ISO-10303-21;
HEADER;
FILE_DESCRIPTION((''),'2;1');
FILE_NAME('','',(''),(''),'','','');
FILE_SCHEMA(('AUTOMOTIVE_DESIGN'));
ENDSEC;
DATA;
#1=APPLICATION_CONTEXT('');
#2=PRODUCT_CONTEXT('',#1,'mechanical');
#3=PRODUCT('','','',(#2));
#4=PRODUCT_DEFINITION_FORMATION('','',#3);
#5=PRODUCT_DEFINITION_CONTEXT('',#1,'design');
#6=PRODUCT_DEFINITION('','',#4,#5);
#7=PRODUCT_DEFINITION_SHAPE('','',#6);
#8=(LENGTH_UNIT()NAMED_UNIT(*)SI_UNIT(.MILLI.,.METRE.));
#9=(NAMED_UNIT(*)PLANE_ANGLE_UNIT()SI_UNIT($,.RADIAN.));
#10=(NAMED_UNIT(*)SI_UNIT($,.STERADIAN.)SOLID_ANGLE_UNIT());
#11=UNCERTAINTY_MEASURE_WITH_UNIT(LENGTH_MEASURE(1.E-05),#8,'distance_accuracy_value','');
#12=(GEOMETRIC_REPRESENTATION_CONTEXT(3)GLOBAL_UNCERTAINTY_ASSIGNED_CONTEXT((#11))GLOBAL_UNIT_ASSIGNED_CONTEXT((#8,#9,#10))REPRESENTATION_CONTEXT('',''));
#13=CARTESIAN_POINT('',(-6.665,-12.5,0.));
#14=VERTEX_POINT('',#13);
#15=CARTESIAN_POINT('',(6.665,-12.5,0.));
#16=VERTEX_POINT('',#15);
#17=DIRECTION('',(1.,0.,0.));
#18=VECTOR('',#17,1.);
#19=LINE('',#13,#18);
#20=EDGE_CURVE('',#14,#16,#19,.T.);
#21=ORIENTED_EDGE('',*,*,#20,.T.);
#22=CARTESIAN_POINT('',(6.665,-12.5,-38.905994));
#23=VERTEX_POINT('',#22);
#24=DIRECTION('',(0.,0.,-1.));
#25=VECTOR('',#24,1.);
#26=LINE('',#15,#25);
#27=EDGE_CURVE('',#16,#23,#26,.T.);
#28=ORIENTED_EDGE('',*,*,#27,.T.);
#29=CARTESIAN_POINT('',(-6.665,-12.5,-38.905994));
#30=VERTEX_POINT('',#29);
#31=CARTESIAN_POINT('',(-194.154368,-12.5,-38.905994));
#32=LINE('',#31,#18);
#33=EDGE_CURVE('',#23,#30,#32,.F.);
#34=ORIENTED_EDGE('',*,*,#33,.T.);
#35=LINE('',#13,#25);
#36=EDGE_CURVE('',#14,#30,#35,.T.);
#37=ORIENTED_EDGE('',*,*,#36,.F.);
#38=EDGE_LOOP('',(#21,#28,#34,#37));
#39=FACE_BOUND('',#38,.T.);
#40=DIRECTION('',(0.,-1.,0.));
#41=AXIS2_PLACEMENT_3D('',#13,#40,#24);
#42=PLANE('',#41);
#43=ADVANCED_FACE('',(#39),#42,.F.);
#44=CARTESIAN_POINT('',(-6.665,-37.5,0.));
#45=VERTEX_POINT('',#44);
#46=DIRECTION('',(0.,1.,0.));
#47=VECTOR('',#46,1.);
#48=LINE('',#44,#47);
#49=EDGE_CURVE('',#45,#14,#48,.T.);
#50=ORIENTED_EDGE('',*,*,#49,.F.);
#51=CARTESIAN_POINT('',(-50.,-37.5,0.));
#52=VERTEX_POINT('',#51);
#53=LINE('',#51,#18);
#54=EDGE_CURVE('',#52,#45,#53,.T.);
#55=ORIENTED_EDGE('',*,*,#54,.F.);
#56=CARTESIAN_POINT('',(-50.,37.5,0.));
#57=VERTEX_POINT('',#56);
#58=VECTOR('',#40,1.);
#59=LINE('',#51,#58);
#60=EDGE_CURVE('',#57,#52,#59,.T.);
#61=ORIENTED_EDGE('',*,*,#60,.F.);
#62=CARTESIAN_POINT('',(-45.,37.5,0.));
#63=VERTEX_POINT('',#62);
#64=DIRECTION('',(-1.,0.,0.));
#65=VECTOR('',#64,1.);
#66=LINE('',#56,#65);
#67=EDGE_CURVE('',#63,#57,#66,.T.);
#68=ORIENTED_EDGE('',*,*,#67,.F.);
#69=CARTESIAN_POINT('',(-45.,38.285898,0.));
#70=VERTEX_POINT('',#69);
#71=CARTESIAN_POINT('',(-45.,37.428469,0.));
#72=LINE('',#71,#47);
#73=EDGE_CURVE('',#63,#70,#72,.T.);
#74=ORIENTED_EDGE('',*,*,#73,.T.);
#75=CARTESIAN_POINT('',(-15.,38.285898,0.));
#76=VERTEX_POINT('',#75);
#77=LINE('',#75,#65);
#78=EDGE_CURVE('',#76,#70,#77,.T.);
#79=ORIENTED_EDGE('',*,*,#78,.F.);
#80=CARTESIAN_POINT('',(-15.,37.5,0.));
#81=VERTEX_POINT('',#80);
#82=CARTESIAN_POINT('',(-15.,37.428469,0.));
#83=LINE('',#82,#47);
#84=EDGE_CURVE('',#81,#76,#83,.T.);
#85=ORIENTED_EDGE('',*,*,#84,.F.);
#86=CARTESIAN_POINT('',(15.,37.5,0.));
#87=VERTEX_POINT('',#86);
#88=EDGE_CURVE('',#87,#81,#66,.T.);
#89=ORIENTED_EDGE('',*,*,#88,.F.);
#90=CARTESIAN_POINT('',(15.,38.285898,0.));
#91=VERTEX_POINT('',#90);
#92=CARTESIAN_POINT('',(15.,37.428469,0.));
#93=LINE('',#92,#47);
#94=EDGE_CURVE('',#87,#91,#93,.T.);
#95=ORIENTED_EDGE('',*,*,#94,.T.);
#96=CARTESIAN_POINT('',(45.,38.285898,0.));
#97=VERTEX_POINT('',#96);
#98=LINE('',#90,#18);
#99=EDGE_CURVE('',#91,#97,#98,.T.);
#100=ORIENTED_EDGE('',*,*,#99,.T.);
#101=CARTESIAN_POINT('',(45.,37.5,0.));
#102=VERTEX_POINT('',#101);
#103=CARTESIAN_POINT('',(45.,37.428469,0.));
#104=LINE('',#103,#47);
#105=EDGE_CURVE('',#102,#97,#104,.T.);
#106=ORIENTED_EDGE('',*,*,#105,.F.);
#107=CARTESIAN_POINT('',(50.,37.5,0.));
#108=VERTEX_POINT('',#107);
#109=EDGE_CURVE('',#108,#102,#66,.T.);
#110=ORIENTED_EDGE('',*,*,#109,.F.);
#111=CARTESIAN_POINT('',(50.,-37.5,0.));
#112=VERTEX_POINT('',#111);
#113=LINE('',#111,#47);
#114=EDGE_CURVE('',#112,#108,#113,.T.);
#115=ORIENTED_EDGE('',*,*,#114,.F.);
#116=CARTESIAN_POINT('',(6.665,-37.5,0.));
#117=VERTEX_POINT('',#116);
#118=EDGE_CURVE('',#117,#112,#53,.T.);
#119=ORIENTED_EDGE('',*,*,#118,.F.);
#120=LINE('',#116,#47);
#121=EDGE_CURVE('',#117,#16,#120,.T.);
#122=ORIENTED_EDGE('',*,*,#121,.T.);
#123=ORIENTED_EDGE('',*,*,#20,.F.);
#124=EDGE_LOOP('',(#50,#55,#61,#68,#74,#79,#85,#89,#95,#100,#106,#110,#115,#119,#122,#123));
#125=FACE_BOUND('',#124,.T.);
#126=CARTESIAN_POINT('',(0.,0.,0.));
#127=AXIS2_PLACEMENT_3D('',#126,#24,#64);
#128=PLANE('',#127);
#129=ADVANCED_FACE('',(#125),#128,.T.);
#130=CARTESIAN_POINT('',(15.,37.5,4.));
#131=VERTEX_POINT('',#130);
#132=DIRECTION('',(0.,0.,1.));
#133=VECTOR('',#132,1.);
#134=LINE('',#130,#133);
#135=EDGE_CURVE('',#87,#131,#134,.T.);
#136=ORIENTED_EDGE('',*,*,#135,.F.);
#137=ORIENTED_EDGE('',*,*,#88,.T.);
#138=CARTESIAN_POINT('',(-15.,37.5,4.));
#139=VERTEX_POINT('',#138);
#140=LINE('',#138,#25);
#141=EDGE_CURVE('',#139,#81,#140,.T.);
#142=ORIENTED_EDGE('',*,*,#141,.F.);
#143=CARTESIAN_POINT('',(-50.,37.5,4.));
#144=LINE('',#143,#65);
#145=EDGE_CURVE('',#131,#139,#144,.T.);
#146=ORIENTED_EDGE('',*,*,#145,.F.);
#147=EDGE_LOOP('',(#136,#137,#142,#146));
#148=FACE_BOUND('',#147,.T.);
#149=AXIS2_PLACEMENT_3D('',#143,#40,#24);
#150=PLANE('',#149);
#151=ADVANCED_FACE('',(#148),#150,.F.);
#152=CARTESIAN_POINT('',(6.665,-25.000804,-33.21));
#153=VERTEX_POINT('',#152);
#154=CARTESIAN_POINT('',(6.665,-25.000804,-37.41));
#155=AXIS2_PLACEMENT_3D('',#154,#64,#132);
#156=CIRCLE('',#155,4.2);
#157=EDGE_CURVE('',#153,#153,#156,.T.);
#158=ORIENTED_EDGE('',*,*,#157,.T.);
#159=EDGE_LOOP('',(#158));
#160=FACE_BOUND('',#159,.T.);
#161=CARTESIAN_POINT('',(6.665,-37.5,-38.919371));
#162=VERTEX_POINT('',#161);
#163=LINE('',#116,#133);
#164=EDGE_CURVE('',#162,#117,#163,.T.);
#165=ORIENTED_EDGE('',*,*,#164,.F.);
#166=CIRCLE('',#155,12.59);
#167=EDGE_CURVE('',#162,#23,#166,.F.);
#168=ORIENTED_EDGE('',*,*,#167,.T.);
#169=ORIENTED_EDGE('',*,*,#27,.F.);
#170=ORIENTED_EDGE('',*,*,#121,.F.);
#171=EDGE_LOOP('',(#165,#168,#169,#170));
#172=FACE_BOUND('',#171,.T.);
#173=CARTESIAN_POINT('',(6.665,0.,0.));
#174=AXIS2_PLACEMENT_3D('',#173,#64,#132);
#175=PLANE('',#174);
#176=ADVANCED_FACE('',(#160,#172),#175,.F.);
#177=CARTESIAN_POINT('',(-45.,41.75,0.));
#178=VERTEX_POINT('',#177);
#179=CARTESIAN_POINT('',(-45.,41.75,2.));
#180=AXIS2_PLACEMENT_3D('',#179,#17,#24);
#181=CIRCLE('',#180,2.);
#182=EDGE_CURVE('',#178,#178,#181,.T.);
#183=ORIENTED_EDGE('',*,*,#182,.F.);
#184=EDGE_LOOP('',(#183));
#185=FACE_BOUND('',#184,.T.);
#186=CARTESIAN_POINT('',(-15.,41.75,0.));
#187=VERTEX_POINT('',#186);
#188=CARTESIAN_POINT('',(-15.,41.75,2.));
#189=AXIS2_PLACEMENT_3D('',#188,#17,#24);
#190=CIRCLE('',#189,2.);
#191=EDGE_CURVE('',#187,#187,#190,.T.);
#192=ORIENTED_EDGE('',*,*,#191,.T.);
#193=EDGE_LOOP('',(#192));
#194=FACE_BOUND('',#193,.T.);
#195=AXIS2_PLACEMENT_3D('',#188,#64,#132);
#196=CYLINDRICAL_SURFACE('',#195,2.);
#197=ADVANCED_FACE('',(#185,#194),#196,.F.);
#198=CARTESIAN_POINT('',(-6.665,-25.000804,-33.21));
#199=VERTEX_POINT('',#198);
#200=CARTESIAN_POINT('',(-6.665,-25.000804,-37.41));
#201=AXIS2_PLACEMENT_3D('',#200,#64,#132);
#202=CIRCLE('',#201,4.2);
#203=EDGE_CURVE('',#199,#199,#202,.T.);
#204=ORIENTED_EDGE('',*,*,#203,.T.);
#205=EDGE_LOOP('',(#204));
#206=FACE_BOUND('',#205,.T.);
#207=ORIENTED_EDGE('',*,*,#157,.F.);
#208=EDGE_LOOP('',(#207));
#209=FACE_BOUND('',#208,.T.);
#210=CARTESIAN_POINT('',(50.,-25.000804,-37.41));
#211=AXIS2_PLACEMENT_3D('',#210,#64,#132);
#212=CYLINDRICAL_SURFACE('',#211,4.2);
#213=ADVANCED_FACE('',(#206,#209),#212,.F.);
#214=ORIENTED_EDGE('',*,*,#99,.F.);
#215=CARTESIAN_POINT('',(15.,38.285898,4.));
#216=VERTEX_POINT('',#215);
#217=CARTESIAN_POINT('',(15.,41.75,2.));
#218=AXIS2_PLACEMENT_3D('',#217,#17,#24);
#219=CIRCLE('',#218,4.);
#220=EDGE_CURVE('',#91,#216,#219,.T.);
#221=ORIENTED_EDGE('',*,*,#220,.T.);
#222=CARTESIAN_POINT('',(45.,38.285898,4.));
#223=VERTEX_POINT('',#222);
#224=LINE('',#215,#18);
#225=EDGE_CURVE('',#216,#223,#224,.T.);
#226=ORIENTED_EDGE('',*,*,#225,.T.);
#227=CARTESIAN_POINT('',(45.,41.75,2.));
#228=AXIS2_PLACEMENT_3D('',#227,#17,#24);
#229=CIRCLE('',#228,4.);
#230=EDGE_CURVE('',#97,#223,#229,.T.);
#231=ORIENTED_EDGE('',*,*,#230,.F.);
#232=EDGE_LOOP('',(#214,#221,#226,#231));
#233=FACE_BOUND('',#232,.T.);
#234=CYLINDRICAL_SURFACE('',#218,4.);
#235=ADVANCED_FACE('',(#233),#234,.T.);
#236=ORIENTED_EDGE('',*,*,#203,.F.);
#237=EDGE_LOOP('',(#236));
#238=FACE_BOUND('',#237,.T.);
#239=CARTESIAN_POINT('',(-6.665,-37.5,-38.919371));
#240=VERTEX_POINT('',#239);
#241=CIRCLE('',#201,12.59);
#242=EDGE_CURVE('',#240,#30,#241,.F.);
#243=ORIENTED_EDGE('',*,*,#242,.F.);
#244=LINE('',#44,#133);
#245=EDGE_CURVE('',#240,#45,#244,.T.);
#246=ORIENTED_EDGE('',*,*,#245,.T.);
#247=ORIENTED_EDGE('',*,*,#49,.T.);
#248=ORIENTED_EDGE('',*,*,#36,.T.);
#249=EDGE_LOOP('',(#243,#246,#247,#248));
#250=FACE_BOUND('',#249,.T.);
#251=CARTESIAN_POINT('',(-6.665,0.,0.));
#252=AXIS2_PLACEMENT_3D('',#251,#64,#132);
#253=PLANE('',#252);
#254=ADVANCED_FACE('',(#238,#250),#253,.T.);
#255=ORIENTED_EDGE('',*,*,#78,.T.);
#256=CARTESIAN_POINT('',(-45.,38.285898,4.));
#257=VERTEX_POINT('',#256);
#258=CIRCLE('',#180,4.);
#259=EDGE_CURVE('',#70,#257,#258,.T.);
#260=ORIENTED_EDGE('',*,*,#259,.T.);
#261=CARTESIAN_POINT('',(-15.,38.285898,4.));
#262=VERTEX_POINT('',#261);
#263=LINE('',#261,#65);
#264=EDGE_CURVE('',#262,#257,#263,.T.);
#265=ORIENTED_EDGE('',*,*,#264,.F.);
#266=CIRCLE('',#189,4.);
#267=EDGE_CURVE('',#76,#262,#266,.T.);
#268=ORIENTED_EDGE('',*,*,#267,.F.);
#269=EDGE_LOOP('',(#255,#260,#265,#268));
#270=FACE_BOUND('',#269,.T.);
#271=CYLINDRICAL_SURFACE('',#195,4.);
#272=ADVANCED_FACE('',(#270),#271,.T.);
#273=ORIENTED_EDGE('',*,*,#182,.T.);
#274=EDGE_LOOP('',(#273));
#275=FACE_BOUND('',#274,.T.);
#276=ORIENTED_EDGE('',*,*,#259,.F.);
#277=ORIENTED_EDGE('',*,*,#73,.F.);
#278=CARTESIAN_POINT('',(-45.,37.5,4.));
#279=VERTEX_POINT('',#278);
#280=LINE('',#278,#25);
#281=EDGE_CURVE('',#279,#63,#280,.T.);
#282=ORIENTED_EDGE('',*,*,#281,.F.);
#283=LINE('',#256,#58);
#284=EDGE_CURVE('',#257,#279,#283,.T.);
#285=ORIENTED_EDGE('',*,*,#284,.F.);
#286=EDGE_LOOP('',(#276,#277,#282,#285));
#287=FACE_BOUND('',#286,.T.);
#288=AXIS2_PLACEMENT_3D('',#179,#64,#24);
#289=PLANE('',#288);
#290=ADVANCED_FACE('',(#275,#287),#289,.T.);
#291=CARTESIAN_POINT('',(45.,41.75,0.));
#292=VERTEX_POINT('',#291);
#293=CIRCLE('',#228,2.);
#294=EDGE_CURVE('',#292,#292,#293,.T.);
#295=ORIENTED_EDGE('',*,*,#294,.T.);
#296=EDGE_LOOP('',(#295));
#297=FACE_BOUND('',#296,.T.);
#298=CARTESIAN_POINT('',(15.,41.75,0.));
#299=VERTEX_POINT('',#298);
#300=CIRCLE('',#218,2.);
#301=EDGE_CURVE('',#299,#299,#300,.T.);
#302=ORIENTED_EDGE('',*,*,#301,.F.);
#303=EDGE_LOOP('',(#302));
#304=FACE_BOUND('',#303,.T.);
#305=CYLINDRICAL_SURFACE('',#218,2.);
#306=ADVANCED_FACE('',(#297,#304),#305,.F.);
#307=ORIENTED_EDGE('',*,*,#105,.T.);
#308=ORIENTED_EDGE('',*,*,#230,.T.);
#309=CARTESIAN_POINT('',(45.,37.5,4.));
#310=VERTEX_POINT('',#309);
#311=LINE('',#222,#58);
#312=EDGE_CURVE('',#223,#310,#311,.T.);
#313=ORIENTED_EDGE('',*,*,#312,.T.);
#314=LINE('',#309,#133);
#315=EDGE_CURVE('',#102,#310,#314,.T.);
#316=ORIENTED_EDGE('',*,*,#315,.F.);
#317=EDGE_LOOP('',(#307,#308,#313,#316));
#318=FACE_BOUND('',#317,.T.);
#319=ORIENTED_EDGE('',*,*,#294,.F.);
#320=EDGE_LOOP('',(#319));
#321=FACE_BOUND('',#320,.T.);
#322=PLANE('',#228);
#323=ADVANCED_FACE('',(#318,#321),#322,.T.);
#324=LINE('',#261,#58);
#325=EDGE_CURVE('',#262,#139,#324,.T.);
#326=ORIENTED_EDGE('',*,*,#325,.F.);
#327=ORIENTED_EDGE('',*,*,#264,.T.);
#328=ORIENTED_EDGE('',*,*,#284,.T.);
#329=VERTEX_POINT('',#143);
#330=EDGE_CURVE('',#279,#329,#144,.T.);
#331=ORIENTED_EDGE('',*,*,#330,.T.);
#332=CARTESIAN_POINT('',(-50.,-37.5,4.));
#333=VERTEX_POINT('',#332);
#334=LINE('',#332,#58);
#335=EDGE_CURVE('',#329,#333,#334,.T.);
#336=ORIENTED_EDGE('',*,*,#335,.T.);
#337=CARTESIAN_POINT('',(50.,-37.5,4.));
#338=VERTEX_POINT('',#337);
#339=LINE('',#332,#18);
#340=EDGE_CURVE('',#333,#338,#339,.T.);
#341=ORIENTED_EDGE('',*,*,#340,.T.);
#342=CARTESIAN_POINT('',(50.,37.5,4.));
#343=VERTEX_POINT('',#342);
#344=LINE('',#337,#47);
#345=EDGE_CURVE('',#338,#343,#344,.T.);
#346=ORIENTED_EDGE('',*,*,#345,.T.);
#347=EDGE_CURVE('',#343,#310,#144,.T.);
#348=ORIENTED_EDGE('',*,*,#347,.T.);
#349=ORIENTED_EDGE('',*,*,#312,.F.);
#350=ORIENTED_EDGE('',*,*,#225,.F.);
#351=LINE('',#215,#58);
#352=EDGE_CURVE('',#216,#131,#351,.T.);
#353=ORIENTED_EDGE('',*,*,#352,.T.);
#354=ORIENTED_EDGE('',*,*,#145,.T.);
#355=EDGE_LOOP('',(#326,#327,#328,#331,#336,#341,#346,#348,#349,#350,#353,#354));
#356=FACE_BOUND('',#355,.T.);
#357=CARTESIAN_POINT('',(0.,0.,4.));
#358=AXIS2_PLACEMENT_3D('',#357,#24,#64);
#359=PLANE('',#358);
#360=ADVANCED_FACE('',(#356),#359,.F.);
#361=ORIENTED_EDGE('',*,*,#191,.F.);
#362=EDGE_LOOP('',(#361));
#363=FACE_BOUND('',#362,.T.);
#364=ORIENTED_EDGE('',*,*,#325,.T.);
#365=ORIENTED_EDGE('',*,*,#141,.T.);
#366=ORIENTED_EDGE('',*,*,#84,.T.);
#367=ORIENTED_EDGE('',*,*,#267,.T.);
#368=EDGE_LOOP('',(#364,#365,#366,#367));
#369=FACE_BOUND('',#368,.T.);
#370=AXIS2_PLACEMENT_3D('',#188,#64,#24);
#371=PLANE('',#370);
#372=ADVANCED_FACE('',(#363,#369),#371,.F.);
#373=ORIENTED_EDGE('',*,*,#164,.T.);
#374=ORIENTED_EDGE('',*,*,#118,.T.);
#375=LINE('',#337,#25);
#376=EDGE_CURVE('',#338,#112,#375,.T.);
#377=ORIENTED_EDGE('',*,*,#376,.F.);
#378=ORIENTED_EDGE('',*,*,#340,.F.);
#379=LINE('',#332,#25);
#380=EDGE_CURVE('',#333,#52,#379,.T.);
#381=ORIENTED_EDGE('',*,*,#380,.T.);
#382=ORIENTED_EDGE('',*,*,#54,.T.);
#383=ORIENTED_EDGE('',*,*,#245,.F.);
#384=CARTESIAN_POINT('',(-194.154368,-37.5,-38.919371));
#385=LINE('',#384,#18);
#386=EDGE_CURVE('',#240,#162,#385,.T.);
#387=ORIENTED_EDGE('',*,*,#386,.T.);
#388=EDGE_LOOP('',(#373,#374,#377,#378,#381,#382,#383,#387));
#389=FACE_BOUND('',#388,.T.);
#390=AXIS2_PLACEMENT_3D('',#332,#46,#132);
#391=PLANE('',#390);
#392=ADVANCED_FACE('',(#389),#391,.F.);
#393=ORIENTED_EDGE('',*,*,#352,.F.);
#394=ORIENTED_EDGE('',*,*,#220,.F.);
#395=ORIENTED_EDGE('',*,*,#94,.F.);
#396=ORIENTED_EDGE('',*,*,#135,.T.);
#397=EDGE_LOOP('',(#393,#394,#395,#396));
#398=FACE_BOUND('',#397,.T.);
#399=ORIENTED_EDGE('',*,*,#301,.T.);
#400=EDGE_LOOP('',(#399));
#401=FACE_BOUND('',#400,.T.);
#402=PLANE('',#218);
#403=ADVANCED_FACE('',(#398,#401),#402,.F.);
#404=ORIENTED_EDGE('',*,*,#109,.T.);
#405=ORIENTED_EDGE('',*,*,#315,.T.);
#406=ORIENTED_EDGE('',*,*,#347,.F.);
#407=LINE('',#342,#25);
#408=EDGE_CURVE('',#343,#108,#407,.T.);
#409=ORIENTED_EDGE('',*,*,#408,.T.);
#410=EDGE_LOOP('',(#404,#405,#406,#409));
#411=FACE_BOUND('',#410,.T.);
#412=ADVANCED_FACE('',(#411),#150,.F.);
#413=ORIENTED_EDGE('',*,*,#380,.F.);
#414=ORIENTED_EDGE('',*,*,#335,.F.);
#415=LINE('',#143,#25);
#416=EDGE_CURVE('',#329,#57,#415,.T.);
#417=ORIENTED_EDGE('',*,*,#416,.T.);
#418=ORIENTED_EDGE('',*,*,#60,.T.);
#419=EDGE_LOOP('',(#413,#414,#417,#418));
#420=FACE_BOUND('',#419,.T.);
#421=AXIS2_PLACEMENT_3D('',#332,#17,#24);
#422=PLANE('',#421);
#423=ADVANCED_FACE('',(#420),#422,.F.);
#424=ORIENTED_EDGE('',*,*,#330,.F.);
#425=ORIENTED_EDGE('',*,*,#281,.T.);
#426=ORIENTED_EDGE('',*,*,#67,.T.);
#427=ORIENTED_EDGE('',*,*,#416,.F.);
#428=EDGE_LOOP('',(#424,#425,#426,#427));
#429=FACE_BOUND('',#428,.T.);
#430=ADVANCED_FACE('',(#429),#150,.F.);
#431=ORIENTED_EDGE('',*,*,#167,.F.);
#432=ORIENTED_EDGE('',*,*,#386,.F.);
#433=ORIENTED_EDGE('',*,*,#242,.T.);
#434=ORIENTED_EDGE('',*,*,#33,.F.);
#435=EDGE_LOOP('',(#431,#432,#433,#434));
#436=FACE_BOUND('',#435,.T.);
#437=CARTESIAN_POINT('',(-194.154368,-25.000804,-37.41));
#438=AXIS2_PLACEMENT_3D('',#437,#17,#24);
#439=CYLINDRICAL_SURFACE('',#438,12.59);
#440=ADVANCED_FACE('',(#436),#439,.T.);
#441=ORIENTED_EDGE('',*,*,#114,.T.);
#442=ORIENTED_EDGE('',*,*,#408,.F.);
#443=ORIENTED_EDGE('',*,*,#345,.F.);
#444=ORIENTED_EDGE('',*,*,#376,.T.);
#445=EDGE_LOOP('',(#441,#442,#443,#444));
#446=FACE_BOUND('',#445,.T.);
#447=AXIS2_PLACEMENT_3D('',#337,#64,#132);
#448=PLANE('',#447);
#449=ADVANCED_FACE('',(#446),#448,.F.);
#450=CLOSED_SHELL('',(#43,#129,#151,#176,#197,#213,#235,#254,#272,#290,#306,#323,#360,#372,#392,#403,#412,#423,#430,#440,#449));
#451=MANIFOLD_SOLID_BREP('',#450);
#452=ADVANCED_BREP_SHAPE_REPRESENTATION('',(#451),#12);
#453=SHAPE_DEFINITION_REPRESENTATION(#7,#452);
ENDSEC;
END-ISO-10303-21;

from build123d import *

# Parameters (mm, degrees)
SKETCH1_W           = 100
SKETCH1_H           = 75
BOSS_EXTRUDE1_DEPTH = 4
SKETCH2_R           = 2
BOSS_EXTRUDE2_DEPTH = 30
SKETCH3_W           = 50
SKETCH3_H           = 25
BOSS_EXTRUDE3_DEPTH = 6.665
CUT_EXTRUDE2_START  = -13.33
CUT_EXTRUDE2_DEPTH  = 13.33
SKETCH5_R           = 4.2
CUT_EXTRUDE3_DEPTH  = 89.340164846


# Read off the part's stored shape, not the designer's step: Cut-Extrude2
with BuildPart() as part:
    # Sketch1 → Boss-Extrude1 (new body)
    with BuildSketch(Plane.XY):
        Rectangle(SKETCH1_W, SKETCH1_H)
    extrude(amount=BOSS_EXTRUDE1_DEPTH)

    # Sketch2 → Boss-Extrude2 (add)
    with BuildSketch(Plane(origin=(45, 0, 0), x_dir=(0, 0, -1), z_dir=(1, 0, 0))):
        with BuildLine():
            Line((-4, 38.285898385), (-4, 37.428468659))
            Line((-4, 37.428468659), (0, 37.428468659))
            Line((0, 37.428468659), (0, 38.285898385))
            ThreePointArc((0, 38.285898385), (-2, 45.75), (-4, 38.285898385))
        make_face()
        with Locations((-2, 41.75)):
            Circle(SKETCH2_R, mode=Mode.SUBTRACT)
    boss_extrude2 = extrude(amount=-BOSS_EXTRUDE2_DEPTH)

    # Mirror1: Boss-Extrude2 across plane
    add(boss_extrude2.mirror(Plane.ZY))

    # Sketch3 → Boss-Extrude3 (add, symmetric)
    with BuildSketch(Plane.ZY):
        with Locations((-25, -25)):
            Rectangle(SKETCH3_W, SKETCH3_H)
    extrude(amount=BOSS_EXTRUDE3_DEPTH, both=True)

    # Cut-Extrude2 outline → Cut-Extrude2 (cut)
    with BuildSketch(Plane.ZY.offset(6.665).offset(CUT_EXTRUDE2_START)):
        with BuildLine():
            Line((-50, -37.5), (-38.919370818, -37.5))
            ThreePointArc((-38.919370818, -37.5), (-46.831015832, -33.352603885), (-50, -25.000804036))
            Line((-50, -25.000804036), (-50, -37.5))
        make_face()
        with BuildLine():
            Line((-50, -12.5), (-50, -25.000804036))
            ThreePointArc((-50, -25.000804036), (-46.826545708, -16.643964506), (-38.905994132, -12.5))
            Line((-38.905994132, -12.5), (-50, -12.5))
        make_face()
    extrude(amount=CUT_EXTRUDE2_DEPTH, mode=Mode.SUBTRACT)

    # Sketch5 → Cut-Extrude3 (cut, through all)
    with BuildSketch(Plane.ZY.offset(6.665)):
        with Locations((-37.41, -25.000804036)):
            Circle(SKETCH5_R)
    extrude(amount=-CUT_EXTRUDE3_DEPTH, mode=Mode.SUBTRACT)


solid = part.part
